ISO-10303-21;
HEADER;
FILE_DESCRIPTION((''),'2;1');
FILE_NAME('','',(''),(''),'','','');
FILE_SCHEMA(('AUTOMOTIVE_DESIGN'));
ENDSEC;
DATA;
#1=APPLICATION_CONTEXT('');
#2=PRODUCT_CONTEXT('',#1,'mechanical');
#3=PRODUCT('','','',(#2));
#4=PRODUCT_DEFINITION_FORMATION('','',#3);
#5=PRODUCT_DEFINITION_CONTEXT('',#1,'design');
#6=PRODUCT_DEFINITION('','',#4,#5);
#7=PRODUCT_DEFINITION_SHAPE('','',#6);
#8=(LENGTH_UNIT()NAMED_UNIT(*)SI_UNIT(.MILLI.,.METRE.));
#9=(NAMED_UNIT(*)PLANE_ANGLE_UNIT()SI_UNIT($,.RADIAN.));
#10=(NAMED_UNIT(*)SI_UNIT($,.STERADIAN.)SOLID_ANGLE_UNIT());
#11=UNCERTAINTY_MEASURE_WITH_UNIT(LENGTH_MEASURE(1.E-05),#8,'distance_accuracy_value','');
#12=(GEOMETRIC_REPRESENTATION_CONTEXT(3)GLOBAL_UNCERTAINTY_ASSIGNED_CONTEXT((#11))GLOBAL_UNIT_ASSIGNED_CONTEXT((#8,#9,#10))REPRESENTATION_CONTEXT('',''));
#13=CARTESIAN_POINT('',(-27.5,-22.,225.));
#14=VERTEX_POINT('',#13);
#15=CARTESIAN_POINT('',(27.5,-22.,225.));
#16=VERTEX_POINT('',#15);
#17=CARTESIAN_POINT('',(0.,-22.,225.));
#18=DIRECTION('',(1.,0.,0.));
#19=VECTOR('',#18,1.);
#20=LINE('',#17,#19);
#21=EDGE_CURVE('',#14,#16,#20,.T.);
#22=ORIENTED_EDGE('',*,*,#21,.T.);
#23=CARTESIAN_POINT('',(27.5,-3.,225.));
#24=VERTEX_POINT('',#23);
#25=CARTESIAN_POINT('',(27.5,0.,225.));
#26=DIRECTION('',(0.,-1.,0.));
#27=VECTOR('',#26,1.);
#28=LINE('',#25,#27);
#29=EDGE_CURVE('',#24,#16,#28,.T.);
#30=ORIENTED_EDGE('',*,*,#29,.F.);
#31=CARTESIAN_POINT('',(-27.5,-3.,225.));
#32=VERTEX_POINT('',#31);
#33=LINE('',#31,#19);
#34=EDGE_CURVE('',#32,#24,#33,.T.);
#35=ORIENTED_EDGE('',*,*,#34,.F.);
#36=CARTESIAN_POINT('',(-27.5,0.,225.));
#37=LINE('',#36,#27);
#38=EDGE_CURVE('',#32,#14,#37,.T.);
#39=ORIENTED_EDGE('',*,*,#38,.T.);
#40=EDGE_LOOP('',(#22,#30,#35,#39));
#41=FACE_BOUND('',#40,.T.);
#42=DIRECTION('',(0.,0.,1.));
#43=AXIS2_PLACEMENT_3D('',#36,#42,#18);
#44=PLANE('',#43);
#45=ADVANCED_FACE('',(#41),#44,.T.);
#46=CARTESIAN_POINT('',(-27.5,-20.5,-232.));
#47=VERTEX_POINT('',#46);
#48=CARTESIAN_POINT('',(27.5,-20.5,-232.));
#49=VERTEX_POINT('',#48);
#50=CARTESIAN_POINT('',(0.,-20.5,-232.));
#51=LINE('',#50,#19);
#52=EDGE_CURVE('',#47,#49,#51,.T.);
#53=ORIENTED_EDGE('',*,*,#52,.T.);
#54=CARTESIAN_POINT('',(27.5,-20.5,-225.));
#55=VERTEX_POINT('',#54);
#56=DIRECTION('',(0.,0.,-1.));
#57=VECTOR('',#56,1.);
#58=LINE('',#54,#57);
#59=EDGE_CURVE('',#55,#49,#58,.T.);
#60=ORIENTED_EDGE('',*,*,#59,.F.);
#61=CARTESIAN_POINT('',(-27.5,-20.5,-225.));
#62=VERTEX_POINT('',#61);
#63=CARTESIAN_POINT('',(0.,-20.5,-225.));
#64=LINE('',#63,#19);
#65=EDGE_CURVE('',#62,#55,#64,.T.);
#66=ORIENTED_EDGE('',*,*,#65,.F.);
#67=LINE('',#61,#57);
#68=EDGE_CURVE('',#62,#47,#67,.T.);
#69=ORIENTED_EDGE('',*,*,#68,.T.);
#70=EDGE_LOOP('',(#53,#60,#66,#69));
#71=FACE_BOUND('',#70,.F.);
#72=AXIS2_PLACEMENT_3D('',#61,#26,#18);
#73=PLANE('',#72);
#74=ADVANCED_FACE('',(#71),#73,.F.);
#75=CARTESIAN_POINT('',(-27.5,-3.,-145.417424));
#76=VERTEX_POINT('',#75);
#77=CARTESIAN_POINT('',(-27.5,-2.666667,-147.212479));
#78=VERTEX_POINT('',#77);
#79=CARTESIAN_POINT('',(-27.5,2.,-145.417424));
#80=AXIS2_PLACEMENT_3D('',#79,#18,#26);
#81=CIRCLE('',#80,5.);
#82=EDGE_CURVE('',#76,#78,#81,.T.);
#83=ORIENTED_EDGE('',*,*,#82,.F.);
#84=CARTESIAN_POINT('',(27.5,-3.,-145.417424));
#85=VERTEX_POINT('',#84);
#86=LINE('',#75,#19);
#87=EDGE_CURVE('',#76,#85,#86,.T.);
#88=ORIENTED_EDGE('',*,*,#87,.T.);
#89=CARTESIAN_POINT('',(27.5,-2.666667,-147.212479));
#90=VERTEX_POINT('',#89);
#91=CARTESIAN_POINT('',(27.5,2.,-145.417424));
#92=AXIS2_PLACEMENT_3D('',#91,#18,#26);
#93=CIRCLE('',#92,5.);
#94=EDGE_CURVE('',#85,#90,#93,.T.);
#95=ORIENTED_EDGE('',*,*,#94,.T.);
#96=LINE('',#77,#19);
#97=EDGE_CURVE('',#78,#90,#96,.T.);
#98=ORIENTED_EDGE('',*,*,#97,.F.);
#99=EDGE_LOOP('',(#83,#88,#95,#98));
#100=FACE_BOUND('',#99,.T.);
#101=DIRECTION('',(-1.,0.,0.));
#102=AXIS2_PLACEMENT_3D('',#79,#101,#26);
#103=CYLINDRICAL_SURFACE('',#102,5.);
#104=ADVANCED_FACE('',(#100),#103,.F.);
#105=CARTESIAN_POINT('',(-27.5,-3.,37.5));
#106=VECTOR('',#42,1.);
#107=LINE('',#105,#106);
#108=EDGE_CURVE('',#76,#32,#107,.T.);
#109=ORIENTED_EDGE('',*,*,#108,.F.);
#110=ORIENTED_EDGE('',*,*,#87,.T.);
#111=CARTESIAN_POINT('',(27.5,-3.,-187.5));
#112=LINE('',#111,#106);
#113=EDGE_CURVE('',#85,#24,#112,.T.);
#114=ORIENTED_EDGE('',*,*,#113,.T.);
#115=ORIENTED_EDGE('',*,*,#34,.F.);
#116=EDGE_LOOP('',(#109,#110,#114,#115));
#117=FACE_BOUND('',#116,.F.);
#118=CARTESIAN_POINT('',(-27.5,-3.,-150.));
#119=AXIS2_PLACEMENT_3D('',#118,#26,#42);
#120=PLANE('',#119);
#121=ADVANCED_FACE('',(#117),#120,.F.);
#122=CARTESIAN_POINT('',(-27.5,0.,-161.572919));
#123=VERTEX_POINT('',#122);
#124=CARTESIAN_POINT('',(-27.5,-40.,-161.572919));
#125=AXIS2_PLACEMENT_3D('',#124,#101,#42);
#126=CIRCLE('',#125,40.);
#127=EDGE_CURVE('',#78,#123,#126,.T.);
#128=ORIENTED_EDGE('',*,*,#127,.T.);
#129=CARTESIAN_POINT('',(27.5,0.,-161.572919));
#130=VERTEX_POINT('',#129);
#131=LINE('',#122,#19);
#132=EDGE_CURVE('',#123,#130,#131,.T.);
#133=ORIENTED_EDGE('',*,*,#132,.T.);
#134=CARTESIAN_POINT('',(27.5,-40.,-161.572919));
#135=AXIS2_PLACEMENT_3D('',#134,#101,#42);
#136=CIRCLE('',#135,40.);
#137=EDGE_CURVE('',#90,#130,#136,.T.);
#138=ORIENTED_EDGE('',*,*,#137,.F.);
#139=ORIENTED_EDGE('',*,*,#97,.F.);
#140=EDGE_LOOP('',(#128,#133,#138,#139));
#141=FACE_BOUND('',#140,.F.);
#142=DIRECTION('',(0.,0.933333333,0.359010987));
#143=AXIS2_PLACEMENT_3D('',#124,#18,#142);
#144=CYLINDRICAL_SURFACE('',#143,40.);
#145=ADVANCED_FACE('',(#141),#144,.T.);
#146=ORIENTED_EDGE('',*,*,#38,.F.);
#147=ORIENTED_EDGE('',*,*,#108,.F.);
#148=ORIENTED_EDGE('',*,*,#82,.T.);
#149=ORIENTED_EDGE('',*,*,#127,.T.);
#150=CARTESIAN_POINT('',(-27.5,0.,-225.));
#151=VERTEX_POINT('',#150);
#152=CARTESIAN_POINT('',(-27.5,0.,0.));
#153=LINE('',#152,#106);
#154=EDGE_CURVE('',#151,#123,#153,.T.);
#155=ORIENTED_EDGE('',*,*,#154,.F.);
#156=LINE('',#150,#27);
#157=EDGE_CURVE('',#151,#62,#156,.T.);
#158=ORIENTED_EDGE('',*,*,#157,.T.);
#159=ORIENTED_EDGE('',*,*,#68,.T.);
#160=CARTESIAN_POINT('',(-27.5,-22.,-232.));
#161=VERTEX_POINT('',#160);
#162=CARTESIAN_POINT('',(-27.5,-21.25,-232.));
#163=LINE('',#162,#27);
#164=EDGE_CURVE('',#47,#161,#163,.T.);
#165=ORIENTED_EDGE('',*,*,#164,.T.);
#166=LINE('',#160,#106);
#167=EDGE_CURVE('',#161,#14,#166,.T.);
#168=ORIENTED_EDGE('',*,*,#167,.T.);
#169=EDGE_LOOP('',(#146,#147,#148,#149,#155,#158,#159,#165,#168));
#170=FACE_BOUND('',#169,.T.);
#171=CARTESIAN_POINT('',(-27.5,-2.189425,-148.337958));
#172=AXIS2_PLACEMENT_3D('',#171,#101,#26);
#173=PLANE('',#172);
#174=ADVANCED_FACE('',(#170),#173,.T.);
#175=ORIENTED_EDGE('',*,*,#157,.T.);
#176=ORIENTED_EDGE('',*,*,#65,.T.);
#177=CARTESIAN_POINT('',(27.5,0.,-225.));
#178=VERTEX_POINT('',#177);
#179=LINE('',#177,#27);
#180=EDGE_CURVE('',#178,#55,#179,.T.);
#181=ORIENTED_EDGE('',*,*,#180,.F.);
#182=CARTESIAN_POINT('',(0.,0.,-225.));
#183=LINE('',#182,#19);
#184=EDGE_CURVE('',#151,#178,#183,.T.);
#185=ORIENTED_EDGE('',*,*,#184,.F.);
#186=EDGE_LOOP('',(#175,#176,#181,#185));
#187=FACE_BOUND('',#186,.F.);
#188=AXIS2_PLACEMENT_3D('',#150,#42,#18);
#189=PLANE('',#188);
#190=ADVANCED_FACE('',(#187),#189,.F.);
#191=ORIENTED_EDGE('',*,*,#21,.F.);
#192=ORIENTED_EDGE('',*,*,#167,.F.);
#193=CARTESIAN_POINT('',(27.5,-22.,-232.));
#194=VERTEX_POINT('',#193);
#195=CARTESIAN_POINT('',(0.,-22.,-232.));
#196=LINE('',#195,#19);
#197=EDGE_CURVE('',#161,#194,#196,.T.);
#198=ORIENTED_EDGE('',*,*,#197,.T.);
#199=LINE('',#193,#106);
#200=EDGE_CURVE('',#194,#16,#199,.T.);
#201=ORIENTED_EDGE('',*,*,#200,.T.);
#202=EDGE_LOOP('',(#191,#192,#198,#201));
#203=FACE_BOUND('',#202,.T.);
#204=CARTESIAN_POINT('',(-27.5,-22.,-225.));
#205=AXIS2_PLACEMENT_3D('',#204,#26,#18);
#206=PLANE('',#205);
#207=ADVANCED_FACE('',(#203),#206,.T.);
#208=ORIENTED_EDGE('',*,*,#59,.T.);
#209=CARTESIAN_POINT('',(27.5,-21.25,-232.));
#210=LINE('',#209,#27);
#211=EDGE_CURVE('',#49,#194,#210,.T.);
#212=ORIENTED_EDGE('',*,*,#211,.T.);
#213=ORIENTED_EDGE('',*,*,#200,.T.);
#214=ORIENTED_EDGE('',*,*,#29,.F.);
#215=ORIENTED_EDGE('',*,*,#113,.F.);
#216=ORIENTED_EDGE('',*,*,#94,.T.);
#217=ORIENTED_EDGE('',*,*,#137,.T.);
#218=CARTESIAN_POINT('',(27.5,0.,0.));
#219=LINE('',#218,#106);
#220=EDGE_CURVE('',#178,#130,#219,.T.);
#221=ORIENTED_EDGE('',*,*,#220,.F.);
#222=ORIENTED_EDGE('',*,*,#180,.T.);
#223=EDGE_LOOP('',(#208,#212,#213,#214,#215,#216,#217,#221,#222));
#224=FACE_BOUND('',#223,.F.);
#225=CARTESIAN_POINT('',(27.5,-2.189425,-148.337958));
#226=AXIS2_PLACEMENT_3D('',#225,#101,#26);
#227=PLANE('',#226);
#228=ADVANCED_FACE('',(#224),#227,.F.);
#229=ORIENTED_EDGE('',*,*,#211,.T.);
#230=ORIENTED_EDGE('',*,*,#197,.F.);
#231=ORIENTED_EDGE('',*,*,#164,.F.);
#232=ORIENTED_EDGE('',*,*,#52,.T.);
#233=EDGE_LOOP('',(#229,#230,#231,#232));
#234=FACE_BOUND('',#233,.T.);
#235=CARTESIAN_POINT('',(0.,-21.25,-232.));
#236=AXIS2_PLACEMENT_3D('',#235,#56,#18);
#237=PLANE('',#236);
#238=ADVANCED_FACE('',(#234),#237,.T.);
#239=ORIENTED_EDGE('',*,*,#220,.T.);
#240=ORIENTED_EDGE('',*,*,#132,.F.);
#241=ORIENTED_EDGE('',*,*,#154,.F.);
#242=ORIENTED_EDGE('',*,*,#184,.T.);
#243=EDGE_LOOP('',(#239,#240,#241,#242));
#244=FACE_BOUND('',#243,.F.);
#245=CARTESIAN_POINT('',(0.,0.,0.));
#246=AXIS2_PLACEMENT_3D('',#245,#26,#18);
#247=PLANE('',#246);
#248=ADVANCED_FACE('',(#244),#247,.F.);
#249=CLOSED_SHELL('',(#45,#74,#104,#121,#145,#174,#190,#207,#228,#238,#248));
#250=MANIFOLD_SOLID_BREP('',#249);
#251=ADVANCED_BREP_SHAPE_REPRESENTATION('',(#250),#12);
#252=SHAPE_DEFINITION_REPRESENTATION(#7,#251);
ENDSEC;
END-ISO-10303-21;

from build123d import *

# Parameters (mm, degrees)
F0_W        = 55
F0_H        = 450
F1_DEPTH    = 22
F2_W        = 55
F2_H        = 1.5
F3_DEPTH    = 7
F4_W        = 3
F4_H        = 375
F5_DEPTH    = 55.001
F6_T1_DEPTH = 55
F7_R        = 40


# Not quite as in the source:
# - a fillet or chamfer that OpenCascade refuses, or shapes differently, is made with other operations: its cross-section is extruded or revolved along the edge and cut away or added


with BuildPart() as f1:
    # F0 (on Front) → F1 (new body)
    with BuildSketch(Plane.XZ):
        Rectangle(F0_W, F0_H)
    extrude(amount=F1_DEPTH)

    # F2 (on face) → F3 (join)
    with BuildSketch(Plane(origin=(0, 0, -225), x_dir=(1, 0, 0), z_dir=(0, 0, -1))):
        with Locations((0, 21.25)):
            Rectangle(F2_W, F2_H)
    extrude(amount=F3_DEPTH)

    # F4 (on face) → F5 (cut, through all)
    with BuildSketch(Plane(origin=(-27.5, 0, 0), x_dir=(0, -1, 0), z_dir=(-1, 0, 0))):
        with Locations((1.5, 37.5)):
            Rectangle(F4_W, F4_H)
    extrude(amount=-F5_DEPTH, mode=Mode.SUBTRACT)

    # F6: fillet of radius 5 on 1 edges, made by hand

    # F6_s2 → F6_t1 (join)
    with BuildSketch(Plane.YZ.offset(-27.5)):
        with BuildLine():
            ThreePointArc((-3, -145.417424305), (-2.1833001327, -148.1560370926), (0, -150))
            Line((0, -150), (-3, -150))
            Line((-3, -150), (-3, -145.417424305))
        make_face()
    extrude(amount=F6_T1_DEPTH)

    # F7
    f7_edges = [f1.edges().sort_by_distance(p)[0] for p in [
        (0, 0, -150),
    ]]
    fillet(f7_edges, radius=F7_R)


solid = f1.part
